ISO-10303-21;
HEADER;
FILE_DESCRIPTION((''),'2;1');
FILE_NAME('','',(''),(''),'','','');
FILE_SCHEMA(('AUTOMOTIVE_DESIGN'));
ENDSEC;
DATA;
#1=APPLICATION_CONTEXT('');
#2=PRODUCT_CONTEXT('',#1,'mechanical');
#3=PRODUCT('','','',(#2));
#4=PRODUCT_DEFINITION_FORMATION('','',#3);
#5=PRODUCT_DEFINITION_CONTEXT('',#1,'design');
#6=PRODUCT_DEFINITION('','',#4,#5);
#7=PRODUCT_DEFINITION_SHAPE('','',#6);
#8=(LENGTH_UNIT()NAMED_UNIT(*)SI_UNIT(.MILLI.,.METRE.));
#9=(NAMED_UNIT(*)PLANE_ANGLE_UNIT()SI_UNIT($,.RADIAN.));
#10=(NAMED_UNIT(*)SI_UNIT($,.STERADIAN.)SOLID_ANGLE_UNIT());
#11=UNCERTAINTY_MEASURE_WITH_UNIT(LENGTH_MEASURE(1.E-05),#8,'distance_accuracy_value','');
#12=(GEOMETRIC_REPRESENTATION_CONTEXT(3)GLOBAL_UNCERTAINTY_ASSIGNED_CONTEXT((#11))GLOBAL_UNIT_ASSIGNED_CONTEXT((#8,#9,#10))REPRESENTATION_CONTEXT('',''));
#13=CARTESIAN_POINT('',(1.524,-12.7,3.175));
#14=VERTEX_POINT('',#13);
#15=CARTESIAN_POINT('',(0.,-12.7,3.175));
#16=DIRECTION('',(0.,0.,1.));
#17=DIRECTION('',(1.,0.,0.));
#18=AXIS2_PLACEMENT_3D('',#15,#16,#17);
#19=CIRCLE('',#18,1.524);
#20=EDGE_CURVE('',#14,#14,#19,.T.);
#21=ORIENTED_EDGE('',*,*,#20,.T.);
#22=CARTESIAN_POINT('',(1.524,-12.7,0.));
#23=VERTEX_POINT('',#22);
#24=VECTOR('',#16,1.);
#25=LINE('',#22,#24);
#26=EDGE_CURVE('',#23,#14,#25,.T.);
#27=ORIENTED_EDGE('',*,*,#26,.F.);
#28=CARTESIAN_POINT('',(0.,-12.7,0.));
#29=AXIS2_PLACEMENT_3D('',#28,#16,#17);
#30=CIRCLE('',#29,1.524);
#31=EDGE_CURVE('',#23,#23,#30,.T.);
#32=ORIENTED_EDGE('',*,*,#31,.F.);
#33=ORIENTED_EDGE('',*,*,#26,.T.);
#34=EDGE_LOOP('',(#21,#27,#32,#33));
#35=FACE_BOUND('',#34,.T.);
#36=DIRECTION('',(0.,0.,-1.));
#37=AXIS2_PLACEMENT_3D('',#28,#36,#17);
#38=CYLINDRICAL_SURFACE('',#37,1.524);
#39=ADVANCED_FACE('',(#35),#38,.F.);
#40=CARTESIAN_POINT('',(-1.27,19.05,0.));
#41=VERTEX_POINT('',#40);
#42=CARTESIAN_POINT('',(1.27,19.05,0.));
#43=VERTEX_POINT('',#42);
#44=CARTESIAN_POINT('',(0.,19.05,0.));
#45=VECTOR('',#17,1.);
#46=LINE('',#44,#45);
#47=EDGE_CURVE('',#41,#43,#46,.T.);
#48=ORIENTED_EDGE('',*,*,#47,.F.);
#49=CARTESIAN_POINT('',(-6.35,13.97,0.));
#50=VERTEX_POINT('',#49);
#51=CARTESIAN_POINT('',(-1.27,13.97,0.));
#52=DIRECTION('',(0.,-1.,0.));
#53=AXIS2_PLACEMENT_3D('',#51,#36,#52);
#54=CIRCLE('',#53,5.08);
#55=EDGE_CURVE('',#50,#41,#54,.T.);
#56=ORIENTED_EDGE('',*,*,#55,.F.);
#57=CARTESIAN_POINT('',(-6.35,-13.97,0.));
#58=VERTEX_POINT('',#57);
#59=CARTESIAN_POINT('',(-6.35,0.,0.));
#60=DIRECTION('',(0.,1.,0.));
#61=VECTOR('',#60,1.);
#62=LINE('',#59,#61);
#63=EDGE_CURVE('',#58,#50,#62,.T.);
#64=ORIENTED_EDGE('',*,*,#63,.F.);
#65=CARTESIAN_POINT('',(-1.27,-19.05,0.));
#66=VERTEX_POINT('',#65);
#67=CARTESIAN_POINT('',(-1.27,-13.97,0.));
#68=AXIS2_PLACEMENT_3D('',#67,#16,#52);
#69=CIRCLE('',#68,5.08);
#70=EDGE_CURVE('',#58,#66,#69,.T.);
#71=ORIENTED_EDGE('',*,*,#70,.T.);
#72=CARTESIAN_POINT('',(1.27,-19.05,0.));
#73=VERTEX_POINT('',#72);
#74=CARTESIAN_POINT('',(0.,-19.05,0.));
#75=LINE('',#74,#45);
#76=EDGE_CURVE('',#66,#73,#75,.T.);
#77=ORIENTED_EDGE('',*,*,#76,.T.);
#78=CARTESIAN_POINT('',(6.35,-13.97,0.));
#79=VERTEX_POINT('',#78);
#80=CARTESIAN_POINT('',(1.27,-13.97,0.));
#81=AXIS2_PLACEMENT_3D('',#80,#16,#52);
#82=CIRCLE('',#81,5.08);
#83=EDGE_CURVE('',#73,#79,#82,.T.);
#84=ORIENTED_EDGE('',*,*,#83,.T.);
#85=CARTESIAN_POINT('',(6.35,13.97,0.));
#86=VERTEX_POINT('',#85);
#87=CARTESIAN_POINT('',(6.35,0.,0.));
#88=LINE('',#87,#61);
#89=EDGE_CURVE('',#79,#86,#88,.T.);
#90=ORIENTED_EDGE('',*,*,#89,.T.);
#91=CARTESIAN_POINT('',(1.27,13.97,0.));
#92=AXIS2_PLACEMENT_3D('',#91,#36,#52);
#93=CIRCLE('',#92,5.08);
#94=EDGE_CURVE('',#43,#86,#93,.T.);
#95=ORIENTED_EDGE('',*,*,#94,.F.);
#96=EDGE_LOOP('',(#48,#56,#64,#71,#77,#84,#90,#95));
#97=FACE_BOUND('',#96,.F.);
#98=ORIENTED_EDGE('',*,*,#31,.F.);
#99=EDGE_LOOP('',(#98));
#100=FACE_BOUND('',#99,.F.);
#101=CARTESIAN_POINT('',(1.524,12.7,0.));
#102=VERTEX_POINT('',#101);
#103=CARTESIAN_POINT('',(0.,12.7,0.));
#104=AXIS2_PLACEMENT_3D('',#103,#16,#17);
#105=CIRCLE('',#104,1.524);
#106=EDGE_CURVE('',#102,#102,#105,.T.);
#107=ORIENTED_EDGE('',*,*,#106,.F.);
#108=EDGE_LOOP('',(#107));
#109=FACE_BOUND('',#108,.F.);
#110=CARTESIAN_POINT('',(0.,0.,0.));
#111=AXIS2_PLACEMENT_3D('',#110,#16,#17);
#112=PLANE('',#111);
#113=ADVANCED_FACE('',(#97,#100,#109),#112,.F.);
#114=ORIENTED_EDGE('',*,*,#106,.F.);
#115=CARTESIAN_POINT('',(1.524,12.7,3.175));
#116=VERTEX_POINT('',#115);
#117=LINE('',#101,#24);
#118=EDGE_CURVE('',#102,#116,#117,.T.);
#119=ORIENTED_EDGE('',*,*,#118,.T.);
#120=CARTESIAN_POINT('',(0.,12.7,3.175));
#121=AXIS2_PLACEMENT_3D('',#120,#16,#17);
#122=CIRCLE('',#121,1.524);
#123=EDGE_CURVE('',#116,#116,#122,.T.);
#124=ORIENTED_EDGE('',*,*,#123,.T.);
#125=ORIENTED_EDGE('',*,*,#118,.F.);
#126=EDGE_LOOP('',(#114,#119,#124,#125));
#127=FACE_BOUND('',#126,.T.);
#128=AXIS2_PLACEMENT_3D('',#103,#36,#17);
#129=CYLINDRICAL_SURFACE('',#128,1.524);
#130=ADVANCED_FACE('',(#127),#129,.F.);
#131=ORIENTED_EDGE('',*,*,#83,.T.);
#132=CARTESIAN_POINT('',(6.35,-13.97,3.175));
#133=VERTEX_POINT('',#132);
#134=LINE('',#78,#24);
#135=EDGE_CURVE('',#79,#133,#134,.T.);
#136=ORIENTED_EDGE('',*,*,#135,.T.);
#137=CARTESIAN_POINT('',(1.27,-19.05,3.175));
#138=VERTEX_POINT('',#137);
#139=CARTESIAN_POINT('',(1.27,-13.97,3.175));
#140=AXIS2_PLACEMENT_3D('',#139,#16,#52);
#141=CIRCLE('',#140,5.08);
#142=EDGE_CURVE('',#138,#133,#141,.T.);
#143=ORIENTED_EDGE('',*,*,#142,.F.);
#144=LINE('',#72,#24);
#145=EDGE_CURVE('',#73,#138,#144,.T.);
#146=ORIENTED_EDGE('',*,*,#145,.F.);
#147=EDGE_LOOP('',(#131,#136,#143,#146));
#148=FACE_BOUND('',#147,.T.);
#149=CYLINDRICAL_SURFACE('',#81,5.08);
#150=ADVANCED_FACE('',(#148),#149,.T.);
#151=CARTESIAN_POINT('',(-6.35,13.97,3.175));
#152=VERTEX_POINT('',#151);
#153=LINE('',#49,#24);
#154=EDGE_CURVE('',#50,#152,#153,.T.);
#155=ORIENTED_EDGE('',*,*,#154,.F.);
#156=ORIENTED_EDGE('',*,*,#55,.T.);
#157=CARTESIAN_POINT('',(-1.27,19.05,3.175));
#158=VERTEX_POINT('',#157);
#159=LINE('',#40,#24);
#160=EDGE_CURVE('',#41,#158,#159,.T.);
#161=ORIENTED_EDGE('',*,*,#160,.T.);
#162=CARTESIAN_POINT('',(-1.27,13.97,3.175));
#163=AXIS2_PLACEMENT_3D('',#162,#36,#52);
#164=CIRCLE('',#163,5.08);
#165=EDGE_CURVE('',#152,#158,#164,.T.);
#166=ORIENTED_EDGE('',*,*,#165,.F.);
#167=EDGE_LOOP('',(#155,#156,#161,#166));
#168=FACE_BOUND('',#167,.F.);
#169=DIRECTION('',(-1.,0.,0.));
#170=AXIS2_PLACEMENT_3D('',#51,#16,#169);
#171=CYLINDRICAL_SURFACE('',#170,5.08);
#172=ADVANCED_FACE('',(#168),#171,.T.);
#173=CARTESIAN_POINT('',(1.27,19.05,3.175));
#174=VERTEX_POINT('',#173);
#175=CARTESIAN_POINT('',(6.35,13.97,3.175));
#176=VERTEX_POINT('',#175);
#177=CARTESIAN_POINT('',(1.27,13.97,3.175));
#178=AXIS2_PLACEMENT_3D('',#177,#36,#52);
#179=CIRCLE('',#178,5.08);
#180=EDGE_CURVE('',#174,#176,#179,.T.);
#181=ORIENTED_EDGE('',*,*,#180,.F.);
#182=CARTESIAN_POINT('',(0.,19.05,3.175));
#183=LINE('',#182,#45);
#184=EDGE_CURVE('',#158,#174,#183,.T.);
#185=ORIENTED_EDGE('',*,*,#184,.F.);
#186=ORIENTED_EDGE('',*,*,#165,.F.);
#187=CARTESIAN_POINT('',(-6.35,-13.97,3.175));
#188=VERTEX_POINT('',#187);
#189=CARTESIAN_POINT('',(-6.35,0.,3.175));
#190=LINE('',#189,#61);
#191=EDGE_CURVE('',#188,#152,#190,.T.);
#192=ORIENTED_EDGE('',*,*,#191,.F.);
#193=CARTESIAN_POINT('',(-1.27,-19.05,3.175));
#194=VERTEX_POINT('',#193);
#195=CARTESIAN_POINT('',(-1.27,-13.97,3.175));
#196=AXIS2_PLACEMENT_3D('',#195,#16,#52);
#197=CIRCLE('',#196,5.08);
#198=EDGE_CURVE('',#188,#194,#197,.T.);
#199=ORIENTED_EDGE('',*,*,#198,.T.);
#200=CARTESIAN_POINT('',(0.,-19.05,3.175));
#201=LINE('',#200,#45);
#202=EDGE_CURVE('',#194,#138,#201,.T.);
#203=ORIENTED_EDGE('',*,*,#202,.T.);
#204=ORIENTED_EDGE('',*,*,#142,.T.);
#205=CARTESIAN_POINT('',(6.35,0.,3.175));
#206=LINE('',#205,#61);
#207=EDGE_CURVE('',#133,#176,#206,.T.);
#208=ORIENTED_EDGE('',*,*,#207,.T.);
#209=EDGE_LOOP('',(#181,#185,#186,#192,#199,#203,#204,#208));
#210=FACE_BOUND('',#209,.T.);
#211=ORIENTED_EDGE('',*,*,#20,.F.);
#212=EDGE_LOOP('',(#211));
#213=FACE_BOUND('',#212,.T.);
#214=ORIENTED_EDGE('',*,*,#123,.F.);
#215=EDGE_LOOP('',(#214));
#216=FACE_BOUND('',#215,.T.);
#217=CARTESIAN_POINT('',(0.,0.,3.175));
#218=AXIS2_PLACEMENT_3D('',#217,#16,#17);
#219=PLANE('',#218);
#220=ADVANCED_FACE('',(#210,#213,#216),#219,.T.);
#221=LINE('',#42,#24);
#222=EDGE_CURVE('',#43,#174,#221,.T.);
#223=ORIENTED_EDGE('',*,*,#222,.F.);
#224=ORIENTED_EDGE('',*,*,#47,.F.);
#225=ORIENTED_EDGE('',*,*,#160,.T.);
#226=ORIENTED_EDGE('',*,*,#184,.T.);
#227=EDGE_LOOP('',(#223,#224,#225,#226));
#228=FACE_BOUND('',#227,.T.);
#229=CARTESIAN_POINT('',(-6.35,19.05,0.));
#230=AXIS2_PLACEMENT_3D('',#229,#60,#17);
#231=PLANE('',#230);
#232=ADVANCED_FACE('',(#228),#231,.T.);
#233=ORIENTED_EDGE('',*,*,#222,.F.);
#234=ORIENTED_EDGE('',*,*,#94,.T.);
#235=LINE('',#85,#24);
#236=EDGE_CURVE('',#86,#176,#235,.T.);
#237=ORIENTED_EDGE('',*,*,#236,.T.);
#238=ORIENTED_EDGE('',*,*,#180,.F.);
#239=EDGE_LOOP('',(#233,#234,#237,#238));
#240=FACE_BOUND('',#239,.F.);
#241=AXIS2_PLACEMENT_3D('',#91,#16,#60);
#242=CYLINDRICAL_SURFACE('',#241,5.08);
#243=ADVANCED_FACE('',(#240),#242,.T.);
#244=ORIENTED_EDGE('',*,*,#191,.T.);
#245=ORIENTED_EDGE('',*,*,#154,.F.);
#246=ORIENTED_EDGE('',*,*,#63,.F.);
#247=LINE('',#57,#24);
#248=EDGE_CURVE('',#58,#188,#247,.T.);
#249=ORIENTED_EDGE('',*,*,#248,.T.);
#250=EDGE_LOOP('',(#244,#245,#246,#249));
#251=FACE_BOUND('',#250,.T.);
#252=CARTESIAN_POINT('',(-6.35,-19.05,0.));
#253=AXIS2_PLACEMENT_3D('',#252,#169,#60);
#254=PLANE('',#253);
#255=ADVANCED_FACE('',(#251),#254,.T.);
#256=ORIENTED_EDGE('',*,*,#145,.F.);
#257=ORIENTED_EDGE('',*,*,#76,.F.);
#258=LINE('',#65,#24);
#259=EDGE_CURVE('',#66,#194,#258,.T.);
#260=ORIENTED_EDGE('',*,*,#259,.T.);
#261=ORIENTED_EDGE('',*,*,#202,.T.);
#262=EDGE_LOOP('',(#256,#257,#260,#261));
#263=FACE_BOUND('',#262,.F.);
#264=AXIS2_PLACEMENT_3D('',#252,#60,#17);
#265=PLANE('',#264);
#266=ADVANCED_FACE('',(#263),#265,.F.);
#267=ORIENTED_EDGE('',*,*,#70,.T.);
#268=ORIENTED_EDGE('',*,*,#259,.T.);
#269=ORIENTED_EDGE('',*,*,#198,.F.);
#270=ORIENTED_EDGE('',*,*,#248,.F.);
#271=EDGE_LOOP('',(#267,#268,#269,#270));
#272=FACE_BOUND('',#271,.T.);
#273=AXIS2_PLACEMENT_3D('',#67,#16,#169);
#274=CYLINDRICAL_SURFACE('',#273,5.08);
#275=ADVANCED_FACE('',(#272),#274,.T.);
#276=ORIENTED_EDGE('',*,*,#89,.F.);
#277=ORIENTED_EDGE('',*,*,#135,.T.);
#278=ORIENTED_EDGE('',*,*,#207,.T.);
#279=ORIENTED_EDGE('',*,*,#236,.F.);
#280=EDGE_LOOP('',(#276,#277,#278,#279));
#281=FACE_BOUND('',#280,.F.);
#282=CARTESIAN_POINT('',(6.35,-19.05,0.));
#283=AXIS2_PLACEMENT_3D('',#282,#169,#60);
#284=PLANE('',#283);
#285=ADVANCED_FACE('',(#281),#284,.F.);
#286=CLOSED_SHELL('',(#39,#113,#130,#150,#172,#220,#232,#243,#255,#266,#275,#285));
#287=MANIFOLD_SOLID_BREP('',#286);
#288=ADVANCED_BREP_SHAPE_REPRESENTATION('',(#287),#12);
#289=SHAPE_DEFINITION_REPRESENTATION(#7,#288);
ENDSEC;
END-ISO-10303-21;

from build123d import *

# Parameters (mm, degrees)
F0_W     = 12.7
F0_H     = 38.1
F0_R     = 1.524
F1_DEPTH = 3.175
F2_R     = 5.08


# Not quite as in the source:
# - a length typed as a fraction of an inch, garbled in the dataset ("3 / 203.2 mm" for 3/8 in), is restored


with BuildPart() as f1:
    # F0 (on Top) → F1 (new body)
    with BuildSketch(Plane.XY):
        Rectangle(F0_W, F0_H)
        with Locations((0, -12.7)):
            Circle(F0_R, mode=Mode.SUBTRACT)
        with Locations((0, 12.7)):
            Circle(F0_R, mode=Mode.SUBTRACT)
    extrude(amount=F1_DEPTH)

    # F2
    f2_edges = [f1.edges().sort_by_distance(p)[0] for p in [
        (-6.35, 19.05, 1.5875),
        (6.35, 19.05, 1.5875),
        (-6.35, -19.05, 1.5875),
        (6.35, -19.05, 1.5875),
    ]]
    fillet(f2_edges, radius=F2_R)


solid = f1.part
